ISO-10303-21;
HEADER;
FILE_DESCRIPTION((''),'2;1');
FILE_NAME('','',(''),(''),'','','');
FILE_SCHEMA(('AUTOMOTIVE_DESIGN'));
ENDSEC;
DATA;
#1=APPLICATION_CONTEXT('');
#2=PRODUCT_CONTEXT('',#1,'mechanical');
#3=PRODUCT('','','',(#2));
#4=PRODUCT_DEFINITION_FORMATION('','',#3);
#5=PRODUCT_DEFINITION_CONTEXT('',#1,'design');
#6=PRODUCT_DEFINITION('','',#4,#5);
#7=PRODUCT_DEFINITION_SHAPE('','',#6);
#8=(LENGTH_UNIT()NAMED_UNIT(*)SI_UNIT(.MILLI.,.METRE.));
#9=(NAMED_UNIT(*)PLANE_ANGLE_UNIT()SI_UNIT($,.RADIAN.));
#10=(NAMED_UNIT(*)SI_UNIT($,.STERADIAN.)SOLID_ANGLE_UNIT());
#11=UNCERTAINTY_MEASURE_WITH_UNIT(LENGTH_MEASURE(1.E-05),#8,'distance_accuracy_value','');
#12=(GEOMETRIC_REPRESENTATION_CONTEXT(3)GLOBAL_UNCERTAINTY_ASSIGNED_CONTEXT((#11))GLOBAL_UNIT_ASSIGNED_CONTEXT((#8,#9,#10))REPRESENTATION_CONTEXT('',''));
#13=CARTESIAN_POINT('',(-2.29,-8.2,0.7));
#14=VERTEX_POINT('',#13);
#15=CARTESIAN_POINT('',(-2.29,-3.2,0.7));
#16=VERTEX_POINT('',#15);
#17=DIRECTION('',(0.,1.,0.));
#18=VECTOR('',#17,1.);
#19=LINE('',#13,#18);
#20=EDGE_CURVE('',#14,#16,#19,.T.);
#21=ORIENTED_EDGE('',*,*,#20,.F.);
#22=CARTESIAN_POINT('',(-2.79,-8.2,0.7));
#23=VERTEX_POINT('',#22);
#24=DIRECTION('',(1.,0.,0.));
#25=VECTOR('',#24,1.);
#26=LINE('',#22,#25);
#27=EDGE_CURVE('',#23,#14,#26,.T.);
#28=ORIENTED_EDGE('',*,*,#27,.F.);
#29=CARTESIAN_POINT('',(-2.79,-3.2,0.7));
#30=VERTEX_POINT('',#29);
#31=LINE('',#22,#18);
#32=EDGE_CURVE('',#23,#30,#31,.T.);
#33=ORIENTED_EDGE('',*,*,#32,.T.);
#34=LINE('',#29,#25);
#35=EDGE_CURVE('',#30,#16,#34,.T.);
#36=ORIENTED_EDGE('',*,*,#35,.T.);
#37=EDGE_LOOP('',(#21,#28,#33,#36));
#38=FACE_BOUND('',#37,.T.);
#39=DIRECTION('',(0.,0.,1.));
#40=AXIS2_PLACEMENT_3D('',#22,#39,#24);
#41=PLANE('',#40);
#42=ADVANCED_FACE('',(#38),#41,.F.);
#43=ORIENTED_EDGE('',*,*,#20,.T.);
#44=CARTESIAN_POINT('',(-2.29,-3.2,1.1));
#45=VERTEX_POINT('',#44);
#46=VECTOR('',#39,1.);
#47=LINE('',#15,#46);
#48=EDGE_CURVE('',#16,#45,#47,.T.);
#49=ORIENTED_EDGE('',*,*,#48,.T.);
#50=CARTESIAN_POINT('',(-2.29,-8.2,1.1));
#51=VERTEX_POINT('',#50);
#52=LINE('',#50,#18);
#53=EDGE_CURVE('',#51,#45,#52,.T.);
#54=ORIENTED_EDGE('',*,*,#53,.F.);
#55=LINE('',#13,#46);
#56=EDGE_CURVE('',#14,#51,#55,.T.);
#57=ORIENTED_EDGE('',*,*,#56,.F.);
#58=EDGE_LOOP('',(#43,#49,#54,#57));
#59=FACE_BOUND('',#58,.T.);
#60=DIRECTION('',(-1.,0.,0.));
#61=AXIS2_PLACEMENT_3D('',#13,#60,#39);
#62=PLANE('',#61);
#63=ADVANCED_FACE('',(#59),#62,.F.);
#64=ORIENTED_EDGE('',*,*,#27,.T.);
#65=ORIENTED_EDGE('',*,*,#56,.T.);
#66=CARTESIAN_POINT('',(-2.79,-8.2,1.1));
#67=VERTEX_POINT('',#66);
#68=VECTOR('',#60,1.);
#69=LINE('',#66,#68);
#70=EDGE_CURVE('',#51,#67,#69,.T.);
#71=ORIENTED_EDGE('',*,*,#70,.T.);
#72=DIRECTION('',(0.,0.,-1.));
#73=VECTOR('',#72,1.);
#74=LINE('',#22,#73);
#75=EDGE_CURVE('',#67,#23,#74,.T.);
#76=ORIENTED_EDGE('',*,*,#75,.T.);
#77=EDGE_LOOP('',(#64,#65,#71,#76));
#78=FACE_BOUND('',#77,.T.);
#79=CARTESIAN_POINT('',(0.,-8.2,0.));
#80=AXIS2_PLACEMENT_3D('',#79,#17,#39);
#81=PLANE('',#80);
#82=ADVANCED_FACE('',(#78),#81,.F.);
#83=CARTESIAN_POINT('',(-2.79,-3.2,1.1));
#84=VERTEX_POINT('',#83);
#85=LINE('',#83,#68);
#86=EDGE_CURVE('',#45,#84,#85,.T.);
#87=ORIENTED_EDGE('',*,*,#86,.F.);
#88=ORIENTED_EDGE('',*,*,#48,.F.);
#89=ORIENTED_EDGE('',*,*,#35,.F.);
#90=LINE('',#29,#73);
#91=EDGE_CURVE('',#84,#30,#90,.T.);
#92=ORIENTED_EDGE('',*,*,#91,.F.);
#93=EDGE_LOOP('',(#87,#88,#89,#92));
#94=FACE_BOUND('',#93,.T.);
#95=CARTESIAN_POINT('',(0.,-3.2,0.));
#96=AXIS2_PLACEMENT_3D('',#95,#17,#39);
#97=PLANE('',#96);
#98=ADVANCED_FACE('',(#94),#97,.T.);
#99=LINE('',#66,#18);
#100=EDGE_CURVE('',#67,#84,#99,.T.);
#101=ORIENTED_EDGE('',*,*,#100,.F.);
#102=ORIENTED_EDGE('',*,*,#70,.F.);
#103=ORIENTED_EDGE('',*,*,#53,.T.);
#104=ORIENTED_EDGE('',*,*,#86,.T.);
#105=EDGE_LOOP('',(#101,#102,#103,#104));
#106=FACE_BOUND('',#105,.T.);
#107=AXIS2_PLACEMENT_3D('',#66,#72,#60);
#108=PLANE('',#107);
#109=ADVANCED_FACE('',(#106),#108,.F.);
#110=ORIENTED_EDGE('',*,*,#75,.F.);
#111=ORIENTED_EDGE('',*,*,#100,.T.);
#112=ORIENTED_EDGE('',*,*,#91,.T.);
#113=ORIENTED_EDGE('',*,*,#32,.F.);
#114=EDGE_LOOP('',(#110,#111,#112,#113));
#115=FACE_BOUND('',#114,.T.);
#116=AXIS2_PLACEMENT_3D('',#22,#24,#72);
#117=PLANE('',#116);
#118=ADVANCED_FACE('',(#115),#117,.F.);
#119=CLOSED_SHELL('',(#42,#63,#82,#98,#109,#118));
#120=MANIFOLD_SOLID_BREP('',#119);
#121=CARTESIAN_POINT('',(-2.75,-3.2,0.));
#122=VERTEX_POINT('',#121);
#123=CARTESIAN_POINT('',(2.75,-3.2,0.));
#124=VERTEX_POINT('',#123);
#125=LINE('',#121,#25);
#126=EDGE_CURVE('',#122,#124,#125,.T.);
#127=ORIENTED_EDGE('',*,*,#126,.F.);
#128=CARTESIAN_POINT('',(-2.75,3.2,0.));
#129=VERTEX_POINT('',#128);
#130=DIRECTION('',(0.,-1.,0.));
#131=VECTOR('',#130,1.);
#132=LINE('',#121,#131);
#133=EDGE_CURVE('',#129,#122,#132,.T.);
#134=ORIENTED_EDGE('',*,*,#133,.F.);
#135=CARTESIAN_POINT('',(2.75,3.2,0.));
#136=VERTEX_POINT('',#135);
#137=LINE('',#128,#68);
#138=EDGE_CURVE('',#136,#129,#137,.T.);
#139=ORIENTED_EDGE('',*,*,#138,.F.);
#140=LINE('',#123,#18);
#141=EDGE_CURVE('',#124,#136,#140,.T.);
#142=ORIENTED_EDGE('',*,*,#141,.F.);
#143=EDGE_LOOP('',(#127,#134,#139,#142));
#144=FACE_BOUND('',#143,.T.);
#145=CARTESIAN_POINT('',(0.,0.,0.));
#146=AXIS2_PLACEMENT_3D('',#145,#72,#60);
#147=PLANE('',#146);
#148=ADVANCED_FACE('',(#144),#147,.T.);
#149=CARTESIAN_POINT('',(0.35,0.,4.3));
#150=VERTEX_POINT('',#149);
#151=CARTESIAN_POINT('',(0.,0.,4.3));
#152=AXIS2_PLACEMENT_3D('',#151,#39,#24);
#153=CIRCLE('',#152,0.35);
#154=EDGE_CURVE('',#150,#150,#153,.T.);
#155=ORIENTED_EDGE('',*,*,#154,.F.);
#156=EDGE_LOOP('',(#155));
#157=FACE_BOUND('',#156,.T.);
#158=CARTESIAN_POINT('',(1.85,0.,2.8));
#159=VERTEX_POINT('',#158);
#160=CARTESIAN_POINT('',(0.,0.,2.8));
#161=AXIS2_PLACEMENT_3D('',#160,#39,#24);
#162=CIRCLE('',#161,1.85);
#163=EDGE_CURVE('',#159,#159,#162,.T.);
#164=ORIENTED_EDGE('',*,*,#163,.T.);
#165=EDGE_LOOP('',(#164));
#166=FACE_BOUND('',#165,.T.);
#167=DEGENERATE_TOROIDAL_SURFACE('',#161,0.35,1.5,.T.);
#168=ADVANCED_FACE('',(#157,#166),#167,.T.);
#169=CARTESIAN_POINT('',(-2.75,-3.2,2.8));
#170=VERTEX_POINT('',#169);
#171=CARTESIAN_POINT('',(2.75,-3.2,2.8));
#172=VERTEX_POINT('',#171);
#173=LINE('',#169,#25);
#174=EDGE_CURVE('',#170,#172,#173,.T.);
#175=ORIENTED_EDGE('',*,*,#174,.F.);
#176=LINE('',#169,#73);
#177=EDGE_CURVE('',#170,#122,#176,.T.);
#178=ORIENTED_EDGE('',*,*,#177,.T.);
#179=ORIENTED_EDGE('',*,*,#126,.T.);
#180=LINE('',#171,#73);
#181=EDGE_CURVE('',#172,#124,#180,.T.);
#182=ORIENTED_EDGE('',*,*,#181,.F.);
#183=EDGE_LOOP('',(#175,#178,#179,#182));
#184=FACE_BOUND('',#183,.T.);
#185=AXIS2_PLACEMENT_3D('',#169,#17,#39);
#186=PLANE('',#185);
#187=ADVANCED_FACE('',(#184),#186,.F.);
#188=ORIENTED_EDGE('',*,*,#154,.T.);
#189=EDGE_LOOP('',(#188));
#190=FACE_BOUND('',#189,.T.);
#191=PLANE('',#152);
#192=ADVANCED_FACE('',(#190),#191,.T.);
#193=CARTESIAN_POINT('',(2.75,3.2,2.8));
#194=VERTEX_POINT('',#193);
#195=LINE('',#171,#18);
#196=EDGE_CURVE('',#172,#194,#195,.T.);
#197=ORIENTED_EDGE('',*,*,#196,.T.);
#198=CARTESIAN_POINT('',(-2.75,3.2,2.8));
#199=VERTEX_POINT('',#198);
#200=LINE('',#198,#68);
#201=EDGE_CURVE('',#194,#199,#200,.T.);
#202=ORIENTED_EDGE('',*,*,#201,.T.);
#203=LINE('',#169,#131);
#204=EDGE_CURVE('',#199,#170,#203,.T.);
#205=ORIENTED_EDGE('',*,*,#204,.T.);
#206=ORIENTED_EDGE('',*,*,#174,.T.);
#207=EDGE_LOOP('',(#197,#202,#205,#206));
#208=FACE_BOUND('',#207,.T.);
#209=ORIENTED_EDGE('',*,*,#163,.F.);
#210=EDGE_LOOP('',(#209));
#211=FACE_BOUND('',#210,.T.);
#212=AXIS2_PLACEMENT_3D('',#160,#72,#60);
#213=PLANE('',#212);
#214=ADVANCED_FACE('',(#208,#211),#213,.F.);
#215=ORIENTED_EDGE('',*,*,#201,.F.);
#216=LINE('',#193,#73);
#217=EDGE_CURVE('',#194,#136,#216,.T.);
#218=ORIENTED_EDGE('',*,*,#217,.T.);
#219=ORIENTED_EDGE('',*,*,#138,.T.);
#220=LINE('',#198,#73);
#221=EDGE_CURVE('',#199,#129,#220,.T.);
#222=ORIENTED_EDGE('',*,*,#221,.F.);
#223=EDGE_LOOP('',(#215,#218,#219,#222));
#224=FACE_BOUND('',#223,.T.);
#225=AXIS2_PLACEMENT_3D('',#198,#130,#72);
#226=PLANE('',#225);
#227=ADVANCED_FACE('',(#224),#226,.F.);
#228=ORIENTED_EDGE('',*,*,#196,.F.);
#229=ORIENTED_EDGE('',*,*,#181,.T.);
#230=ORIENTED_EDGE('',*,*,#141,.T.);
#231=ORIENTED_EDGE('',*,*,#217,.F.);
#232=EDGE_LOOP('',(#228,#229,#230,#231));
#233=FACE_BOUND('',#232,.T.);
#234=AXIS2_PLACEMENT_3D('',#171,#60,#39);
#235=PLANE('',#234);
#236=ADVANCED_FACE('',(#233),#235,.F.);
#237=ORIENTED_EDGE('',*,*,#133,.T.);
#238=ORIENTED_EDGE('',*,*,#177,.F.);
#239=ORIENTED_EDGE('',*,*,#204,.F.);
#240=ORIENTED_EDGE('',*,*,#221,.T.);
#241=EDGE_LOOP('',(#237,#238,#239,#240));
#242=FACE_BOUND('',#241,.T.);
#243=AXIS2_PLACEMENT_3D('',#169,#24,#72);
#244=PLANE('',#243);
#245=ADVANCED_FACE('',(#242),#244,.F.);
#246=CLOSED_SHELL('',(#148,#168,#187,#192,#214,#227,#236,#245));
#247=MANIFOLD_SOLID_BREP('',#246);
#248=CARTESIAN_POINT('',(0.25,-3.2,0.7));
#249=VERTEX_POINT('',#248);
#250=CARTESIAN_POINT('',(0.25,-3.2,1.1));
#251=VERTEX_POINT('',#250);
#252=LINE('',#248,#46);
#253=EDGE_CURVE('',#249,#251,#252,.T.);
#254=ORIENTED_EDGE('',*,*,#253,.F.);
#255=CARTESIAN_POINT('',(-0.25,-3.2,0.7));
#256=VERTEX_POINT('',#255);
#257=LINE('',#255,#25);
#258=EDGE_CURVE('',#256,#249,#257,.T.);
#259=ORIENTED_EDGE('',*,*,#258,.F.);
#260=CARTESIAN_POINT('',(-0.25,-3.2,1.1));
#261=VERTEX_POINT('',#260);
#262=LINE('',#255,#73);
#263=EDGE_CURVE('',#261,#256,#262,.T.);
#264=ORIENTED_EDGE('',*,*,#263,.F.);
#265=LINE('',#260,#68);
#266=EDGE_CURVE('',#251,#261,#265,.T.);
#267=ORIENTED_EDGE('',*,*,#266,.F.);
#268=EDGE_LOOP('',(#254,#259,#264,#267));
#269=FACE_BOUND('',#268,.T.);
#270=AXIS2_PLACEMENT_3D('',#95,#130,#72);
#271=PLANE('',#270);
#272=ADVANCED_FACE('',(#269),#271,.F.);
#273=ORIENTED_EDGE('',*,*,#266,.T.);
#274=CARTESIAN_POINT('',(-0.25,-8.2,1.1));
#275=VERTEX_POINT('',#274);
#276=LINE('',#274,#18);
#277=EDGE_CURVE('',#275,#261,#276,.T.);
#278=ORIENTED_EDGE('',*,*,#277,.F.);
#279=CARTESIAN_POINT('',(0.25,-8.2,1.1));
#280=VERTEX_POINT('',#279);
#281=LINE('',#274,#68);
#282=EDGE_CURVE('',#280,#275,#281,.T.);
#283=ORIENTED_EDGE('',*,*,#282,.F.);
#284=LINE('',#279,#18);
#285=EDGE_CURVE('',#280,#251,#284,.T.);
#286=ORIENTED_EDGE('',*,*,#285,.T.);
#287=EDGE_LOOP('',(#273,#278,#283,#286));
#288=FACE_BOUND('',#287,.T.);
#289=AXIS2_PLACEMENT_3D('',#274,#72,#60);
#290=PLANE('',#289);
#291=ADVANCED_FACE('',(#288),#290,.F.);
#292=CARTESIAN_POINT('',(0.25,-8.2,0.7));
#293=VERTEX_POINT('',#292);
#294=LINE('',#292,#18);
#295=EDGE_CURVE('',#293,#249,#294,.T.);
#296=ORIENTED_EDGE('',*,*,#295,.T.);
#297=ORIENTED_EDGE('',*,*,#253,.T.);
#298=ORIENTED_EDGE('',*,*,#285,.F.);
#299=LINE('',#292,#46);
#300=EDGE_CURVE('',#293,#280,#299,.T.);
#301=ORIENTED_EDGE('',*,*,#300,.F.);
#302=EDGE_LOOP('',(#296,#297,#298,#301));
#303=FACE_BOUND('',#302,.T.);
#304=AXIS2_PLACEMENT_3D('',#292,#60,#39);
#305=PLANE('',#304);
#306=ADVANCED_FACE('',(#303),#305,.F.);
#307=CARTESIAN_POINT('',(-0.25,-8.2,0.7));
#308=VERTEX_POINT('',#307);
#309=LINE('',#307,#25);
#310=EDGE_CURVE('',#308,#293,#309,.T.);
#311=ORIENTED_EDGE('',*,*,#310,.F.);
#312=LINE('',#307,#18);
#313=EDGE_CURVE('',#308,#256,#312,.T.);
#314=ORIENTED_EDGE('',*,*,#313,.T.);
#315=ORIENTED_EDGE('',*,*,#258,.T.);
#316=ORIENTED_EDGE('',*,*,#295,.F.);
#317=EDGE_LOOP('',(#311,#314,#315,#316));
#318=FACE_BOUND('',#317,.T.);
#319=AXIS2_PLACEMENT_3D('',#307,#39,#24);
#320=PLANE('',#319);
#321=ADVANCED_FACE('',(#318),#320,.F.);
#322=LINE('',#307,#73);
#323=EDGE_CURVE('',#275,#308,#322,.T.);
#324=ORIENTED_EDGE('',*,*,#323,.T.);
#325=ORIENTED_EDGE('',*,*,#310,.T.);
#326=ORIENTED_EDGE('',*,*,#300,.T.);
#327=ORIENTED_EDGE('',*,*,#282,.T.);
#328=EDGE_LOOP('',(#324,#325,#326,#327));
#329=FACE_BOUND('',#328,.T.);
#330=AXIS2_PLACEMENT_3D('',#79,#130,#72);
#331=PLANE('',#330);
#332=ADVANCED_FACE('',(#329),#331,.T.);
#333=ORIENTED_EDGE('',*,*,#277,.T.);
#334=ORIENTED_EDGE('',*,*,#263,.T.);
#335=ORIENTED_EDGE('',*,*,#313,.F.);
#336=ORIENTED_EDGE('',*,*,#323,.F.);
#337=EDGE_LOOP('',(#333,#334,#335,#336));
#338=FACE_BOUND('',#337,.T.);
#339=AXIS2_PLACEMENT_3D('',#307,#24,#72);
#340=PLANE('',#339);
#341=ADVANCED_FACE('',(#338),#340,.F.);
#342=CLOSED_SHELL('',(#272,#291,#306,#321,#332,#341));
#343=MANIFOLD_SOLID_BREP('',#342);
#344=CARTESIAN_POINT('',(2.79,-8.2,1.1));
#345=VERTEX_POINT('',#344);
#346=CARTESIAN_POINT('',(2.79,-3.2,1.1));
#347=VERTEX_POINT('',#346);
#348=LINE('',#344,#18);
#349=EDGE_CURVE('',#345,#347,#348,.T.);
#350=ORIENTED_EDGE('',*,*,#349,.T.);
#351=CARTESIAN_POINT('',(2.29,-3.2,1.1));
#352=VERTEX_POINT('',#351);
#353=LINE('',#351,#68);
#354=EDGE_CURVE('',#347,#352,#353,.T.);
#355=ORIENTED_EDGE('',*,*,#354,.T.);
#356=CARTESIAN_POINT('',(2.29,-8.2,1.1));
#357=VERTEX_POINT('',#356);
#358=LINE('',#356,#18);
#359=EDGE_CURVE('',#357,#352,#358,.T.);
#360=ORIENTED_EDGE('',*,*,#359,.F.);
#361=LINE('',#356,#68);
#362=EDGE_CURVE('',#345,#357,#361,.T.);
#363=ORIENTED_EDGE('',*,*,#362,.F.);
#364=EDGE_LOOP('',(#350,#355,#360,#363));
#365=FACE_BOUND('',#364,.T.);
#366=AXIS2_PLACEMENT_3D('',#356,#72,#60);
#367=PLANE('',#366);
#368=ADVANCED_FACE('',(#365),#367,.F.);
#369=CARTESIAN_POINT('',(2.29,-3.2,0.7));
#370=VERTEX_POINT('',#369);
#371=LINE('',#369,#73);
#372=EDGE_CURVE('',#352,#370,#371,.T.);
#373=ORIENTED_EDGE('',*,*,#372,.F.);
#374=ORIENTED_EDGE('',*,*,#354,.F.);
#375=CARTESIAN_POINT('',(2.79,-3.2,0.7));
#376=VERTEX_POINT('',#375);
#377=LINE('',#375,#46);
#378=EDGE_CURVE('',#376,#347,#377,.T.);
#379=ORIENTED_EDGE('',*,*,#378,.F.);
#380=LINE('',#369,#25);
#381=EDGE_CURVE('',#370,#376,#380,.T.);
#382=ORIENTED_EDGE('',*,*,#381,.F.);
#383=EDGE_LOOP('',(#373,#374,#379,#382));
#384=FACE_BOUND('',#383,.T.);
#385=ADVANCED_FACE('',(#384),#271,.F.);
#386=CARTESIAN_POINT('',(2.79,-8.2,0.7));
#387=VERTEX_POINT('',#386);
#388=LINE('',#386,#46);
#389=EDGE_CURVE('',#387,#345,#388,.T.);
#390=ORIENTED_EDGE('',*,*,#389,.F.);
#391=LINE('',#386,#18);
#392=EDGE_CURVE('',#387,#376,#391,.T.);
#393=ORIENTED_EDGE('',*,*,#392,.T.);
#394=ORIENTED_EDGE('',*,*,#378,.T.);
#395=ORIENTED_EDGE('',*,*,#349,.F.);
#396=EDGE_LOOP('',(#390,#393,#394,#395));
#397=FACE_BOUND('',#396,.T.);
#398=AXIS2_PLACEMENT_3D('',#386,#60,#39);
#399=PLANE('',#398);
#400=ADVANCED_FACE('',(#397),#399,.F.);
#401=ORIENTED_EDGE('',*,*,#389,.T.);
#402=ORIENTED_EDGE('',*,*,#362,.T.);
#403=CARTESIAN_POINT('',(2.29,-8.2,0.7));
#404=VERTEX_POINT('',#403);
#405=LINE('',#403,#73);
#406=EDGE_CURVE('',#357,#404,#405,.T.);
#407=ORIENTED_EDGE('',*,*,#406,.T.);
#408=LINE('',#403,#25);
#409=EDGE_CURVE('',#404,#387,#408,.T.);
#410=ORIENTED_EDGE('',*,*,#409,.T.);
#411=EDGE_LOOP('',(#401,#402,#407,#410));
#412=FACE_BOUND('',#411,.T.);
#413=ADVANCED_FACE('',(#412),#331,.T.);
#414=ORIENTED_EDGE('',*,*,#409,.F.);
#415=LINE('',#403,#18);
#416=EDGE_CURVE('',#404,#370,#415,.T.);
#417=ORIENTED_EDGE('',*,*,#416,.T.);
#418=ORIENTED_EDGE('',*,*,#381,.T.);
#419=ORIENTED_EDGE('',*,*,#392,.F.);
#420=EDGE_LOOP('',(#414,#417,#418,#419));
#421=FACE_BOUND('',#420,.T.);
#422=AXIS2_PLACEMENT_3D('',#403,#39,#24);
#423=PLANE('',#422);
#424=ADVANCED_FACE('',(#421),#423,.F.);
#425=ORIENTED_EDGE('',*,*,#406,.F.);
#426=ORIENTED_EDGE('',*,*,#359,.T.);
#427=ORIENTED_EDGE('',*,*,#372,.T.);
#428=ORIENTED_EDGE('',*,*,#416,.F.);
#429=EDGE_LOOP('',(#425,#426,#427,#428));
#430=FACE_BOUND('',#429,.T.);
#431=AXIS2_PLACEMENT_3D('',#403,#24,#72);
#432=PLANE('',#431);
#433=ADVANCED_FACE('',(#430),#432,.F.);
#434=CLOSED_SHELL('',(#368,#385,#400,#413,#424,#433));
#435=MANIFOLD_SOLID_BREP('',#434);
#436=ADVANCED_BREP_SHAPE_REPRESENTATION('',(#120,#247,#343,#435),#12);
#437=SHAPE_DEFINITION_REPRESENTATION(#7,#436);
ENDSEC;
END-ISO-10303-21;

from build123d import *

# Parameters (mm, degrees)
SKETCH_1_W        = 5.5
SKETCH_1_H        = 6.4
EXTRUDE_1_DEPTH   = 2.8
SKETCH_3_R        = 1.85
EXTRUDE_2_DEPTH   = 1.5
FILLET_1_R        = 1.5
SKETCH_2_W        = 0.5
SKETCH_2_H        = 0.4
EXTRUDE_3_DEPTH   = 5
EXTRUDE_3_2_DEPTH = 5
EXTRUDE_3_3_DEPTH = 5


with BuildPart() as part:
    # 草图1 → 凸台-拉伸1 (new body)
    with BuildSketch(Plane.XY):
        Rectangle(SKETCH_1_W, SKETCH_1_H)
    extrude(amount=EXTRUDE_1_DEPTH)

    # 草图3 → 凸台-拉伸2 (add)
    with BuildSketch(Plane.XY.offset(2.8)):
        Circle(SKETCH_3_R)
    extrude(amount=EXTRUDE_2_DEPTH)

    # 圆角1
    fillet_1_edges = [part.edges().sort_by_distance(p)[0] for p in [
        (-1.85, 0, 4.3),
    ]]
    fillet(fillet_1_edges, radius=FILLET_1_R - 0.0001)  # a hair under: the kernel refuses the full size


with BuildPart() as body_2:
    # 草图2 → 凸台-拉伸3 (new body)
    with BuildSketch(Plane.XZ.offset(3.2)):
        with Locations((0, 0.9)):
            Rectangle(SKETCH_2_W, SKETCH_2_H)
    extrude(amount=EXTRUDE_3_DEPTH)


with BuildPart() as body_3:
    # 草图2 → Extrude 3 2 (new body)
    with BuildSketch(Plane.XZ.offset(3.2)):
        with Locations((-2.54, 0.9)):
            Rectangle(SKETCH_2_W, SKETCH_2_H)
    extrude(amount=EXTRUDE_3_2_DEPTH)


with BuildPart() as body_4:
    # 草图2 → Extrude 3 3 (new body)
    with BuildSketch(Plane.XZ.offset(3.2)):
        with Locations((2.54, 0.9)):
            Rectangle(SKETCH_2_W, SKETCH_2_H)
    extrude(amount=EXTRUDE_3_3_DEPTH)


solid = Compound([part.part, body_2.part, body_3.part, body_4.part])
